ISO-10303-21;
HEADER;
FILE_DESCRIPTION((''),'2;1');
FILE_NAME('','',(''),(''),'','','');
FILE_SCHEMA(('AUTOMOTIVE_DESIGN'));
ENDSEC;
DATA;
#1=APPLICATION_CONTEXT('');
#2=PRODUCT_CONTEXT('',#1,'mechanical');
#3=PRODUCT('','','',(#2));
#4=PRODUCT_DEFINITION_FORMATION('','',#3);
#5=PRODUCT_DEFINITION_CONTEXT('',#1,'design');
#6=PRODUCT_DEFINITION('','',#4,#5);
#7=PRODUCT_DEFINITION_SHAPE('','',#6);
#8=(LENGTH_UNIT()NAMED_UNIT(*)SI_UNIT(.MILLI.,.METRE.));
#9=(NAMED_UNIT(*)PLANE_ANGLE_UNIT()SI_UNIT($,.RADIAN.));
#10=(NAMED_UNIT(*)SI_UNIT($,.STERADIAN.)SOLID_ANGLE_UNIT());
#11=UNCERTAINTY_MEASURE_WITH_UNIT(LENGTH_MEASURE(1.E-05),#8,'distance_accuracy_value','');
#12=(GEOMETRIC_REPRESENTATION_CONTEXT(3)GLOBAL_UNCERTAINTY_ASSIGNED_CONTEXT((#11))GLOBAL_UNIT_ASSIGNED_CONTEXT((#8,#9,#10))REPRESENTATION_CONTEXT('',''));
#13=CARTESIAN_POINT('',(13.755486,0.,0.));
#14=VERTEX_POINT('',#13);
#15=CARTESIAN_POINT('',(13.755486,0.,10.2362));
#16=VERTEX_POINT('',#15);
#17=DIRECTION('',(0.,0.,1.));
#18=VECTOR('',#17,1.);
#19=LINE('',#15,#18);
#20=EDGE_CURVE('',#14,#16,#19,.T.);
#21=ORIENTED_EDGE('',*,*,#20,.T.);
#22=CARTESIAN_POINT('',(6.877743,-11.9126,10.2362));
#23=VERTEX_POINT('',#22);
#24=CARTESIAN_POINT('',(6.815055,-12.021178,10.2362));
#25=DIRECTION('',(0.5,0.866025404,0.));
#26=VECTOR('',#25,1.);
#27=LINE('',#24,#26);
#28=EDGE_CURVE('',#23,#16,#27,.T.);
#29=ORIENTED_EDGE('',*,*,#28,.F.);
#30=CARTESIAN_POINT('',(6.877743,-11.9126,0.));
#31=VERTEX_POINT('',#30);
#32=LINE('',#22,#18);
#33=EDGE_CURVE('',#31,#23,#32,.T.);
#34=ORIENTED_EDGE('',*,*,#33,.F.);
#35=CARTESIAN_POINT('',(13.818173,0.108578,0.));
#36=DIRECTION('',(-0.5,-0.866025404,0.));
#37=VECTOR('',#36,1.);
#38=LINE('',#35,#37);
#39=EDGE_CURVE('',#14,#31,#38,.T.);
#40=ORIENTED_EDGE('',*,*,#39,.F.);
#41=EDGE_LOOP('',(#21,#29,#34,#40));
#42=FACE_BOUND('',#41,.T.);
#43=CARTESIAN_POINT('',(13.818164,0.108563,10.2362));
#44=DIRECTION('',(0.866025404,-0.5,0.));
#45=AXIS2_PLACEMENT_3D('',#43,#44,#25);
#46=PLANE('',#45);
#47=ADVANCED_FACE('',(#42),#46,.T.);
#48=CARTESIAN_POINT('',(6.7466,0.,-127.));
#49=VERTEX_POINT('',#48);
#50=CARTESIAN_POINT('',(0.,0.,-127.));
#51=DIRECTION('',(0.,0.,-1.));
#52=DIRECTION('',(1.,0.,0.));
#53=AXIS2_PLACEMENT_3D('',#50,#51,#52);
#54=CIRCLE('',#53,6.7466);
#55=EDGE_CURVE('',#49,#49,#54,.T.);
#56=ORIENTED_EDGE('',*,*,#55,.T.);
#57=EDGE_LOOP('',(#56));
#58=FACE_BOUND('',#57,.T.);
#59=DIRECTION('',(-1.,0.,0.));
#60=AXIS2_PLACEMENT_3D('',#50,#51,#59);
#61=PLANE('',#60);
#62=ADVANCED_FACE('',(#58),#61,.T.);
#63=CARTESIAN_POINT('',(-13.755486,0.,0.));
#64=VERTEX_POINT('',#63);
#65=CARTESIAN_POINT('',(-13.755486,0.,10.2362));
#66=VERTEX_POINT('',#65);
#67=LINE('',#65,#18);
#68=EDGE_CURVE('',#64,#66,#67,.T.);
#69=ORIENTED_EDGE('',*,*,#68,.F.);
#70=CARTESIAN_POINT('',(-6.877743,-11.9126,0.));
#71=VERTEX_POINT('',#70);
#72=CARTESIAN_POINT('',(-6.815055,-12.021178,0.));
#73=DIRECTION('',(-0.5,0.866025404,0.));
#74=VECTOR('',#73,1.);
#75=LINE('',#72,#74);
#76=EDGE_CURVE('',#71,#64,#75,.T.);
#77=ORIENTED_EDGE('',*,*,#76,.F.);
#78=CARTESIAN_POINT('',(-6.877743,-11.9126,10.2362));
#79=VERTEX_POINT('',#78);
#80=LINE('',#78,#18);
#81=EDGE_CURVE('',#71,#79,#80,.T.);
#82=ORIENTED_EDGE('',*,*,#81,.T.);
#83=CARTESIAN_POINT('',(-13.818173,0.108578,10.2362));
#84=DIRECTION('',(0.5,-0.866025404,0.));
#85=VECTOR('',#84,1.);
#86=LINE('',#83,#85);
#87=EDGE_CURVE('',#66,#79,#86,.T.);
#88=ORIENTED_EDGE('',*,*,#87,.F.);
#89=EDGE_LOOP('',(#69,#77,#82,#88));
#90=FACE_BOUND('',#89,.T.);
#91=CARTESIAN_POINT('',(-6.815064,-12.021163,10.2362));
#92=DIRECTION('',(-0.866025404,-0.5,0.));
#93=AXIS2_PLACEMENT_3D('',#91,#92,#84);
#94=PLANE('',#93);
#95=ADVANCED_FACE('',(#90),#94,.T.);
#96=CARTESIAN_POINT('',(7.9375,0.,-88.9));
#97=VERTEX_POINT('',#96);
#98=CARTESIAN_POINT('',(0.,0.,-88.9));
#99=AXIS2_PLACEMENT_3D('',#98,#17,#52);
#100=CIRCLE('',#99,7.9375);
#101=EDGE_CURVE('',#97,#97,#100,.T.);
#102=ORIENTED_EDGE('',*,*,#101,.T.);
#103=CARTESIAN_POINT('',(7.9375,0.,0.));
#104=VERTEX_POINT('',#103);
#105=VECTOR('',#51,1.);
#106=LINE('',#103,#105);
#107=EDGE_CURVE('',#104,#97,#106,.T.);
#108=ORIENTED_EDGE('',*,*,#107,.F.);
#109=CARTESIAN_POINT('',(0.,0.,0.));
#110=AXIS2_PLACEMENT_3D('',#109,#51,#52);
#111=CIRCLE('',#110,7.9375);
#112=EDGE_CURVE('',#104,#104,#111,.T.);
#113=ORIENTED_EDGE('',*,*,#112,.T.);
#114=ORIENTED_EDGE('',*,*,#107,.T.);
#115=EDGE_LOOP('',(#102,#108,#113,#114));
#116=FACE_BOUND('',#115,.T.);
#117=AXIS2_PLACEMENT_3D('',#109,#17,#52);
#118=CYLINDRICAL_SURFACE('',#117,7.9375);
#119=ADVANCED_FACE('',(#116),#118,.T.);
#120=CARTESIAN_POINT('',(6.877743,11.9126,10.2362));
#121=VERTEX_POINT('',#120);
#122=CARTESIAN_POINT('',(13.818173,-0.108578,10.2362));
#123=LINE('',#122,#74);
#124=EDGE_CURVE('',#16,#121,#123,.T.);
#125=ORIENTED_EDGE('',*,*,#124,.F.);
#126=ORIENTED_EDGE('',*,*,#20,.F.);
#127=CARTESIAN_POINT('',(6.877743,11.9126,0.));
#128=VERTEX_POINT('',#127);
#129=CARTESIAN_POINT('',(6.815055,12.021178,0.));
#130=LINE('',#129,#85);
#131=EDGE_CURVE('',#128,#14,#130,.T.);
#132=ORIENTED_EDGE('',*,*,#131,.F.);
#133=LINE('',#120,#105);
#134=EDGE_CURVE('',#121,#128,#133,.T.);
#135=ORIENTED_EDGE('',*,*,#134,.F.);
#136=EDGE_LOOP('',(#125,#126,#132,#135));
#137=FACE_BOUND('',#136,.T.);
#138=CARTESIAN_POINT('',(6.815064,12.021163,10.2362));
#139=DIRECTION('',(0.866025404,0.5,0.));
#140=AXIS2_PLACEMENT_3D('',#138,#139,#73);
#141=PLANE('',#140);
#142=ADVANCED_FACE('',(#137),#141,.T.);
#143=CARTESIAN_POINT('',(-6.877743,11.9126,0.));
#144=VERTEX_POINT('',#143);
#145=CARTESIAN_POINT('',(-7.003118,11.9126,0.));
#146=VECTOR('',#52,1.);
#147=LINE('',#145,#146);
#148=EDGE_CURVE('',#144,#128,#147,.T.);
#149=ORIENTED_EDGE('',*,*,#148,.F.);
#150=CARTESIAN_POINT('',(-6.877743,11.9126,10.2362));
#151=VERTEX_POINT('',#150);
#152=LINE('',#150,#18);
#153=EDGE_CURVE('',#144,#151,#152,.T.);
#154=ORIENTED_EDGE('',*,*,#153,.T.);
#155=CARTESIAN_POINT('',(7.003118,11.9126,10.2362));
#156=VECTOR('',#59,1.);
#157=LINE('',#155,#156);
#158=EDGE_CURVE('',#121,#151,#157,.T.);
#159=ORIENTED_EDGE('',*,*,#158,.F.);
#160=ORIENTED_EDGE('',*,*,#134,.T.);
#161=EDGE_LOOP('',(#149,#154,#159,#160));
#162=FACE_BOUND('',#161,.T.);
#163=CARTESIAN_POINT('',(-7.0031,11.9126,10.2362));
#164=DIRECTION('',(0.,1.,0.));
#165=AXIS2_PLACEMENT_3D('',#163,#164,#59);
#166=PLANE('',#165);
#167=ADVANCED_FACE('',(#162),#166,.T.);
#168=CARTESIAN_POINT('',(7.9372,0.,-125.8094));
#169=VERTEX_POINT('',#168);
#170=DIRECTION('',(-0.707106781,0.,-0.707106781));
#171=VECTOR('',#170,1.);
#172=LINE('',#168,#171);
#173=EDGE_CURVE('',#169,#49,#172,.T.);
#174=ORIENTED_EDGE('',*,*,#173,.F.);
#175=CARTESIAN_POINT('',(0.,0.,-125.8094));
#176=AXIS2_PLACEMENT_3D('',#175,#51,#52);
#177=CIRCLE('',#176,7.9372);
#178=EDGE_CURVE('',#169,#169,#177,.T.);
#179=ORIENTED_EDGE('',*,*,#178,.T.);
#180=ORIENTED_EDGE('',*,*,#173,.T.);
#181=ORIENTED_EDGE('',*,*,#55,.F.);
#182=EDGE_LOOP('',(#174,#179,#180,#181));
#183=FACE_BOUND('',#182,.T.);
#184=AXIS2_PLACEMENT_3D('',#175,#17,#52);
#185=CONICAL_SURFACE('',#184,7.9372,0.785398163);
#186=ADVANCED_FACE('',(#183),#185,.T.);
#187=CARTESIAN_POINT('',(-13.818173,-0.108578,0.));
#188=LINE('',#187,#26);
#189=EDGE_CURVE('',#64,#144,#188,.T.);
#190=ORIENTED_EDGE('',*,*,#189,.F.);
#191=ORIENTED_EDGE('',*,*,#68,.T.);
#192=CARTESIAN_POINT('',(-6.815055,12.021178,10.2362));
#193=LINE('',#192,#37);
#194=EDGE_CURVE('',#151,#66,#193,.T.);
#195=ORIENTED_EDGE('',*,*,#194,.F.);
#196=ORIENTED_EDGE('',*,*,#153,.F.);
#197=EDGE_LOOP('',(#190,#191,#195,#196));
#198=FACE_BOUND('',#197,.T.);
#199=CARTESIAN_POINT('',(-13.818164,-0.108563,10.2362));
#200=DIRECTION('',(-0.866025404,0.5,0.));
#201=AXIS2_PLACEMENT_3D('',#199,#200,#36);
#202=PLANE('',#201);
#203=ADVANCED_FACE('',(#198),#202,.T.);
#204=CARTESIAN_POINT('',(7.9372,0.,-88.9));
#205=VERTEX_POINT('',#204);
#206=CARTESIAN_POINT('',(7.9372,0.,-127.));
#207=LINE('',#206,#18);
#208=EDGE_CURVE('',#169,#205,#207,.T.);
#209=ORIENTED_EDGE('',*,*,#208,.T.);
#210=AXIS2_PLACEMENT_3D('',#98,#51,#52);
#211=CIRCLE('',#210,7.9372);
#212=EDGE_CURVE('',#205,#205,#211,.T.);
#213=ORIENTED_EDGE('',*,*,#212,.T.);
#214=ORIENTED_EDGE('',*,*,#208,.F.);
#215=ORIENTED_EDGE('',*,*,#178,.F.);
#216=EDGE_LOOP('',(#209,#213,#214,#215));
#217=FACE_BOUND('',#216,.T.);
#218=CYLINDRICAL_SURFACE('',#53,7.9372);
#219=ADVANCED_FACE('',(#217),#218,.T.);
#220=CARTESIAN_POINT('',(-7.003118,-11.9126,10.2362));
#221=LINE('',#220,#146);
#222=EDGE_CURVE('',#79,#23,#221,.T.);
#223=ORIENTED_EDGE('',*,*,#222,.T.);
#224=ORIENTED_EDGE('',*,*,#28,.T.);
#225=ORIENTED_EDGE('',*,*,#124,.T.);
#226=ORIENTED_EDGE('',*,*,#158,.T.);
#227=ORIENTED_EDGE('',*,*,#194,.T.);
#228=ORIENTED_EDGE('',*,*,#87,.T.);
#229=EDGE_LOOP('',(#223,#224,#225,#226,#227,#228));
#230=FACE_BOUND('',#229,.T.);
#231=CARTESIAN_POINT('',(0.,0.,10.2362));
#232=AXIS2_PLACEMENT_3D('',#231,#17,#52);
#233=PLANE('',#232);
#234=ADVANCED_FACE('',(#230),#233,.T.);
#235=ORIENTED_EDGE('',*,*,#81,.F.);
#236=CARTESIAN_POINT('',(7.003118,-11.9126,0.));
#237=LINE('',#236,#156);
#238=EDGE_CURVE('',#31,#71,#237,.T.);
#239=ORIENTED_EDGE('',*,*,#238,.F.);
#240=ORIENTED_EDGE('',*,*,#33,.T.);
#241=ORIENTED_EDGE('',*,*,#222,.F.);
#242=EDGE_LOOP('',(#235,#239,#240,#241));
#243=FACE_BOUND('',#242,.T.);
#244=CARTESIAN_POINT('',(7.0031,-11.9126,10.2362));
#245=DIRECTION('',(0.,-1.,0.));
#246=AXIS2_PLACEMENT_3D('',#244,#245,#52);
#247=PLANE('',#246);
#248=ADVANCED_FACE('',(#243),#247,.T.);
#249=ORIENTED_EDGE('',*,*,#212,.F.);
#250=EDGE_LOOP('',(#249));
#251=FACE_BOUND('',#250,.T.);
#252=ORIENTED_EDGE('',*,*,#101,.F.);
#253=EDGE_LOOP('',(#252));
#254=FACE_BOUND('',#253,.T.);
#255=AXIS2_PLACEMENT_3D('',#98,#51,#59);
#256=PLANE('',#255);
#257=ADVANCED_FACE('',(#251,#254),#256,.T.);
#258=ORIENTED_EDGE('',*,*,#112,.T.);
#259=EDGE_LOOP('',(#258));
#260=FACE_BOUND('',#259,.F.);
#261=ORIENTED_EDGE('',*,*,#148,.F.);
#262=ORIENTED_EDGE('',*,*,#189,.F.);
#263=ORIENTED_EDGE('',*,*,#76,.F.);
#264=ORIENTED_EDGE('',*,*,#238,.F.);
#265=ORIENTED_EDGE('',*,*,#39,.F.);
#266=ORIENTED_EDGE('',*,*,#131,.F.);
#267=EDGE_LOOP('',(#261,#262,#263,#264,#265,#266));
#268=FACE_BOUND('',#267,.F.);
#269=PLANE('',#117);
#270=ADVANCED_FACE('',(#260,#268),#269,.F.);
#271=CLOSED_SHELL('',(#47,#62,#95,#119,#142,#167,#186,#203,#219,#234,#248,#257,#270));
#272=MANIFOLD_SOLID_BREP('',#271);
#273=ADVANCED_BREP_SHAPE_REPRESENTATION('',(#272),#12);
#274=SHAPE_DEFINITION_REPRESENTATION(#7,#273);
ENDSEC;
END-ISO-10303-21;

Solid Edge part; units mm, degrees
sketch "Sketch1" plane through (0, 0, 0) normal (0, 0, 1) x (1, 0, 0)
  circle A0 centre (0, 0) radius 13.8186
  dimension "D1" = 27.6372
extrude "Protrusion1" add sketch "Sketch1" along normal blind 10.2362
sketch "Sketch2" plane through (0, 0, 0) normal (0, 0, -1) x (1, 0, 0)
  circle A0 centre (0, 0) radius 7.9375
extrude "Protrusion2" add sketch "Sketch2" along normal blind 127
sketch "Sketch3" plane through (0, 0, -127) normal (0, 0, -1) x (1, 0, 0)
  circle A0 centre (0, 0) radius 7.9372
extrude "Cutout1" cut sketch "Sketch3" against normal blind 38.1 flip side to cut
chamfer "Chamfer_1" distance 1.1906 angle 45 1 edges at (-7.9372, 0, -127)
sketch "Sketch4" plane through (0, 0, 10.2362) normal (0, 0, 1) x (1, 0, 0)
  line L0 (-7.0031, 11.9126) -> (7.0031, 11.9126)
  dimension "D1" = 23.8252
extrude "Cutout2" cut sketch "Sketch4" against normal up to next material side at (0, 11.9626, 10.2362)
pattern_circular "Pattern1" count 6 over 360 about axis through (0, 0, 10.2362) along (0, 0, 1) of "Cutout2"
properties part number "117665"
